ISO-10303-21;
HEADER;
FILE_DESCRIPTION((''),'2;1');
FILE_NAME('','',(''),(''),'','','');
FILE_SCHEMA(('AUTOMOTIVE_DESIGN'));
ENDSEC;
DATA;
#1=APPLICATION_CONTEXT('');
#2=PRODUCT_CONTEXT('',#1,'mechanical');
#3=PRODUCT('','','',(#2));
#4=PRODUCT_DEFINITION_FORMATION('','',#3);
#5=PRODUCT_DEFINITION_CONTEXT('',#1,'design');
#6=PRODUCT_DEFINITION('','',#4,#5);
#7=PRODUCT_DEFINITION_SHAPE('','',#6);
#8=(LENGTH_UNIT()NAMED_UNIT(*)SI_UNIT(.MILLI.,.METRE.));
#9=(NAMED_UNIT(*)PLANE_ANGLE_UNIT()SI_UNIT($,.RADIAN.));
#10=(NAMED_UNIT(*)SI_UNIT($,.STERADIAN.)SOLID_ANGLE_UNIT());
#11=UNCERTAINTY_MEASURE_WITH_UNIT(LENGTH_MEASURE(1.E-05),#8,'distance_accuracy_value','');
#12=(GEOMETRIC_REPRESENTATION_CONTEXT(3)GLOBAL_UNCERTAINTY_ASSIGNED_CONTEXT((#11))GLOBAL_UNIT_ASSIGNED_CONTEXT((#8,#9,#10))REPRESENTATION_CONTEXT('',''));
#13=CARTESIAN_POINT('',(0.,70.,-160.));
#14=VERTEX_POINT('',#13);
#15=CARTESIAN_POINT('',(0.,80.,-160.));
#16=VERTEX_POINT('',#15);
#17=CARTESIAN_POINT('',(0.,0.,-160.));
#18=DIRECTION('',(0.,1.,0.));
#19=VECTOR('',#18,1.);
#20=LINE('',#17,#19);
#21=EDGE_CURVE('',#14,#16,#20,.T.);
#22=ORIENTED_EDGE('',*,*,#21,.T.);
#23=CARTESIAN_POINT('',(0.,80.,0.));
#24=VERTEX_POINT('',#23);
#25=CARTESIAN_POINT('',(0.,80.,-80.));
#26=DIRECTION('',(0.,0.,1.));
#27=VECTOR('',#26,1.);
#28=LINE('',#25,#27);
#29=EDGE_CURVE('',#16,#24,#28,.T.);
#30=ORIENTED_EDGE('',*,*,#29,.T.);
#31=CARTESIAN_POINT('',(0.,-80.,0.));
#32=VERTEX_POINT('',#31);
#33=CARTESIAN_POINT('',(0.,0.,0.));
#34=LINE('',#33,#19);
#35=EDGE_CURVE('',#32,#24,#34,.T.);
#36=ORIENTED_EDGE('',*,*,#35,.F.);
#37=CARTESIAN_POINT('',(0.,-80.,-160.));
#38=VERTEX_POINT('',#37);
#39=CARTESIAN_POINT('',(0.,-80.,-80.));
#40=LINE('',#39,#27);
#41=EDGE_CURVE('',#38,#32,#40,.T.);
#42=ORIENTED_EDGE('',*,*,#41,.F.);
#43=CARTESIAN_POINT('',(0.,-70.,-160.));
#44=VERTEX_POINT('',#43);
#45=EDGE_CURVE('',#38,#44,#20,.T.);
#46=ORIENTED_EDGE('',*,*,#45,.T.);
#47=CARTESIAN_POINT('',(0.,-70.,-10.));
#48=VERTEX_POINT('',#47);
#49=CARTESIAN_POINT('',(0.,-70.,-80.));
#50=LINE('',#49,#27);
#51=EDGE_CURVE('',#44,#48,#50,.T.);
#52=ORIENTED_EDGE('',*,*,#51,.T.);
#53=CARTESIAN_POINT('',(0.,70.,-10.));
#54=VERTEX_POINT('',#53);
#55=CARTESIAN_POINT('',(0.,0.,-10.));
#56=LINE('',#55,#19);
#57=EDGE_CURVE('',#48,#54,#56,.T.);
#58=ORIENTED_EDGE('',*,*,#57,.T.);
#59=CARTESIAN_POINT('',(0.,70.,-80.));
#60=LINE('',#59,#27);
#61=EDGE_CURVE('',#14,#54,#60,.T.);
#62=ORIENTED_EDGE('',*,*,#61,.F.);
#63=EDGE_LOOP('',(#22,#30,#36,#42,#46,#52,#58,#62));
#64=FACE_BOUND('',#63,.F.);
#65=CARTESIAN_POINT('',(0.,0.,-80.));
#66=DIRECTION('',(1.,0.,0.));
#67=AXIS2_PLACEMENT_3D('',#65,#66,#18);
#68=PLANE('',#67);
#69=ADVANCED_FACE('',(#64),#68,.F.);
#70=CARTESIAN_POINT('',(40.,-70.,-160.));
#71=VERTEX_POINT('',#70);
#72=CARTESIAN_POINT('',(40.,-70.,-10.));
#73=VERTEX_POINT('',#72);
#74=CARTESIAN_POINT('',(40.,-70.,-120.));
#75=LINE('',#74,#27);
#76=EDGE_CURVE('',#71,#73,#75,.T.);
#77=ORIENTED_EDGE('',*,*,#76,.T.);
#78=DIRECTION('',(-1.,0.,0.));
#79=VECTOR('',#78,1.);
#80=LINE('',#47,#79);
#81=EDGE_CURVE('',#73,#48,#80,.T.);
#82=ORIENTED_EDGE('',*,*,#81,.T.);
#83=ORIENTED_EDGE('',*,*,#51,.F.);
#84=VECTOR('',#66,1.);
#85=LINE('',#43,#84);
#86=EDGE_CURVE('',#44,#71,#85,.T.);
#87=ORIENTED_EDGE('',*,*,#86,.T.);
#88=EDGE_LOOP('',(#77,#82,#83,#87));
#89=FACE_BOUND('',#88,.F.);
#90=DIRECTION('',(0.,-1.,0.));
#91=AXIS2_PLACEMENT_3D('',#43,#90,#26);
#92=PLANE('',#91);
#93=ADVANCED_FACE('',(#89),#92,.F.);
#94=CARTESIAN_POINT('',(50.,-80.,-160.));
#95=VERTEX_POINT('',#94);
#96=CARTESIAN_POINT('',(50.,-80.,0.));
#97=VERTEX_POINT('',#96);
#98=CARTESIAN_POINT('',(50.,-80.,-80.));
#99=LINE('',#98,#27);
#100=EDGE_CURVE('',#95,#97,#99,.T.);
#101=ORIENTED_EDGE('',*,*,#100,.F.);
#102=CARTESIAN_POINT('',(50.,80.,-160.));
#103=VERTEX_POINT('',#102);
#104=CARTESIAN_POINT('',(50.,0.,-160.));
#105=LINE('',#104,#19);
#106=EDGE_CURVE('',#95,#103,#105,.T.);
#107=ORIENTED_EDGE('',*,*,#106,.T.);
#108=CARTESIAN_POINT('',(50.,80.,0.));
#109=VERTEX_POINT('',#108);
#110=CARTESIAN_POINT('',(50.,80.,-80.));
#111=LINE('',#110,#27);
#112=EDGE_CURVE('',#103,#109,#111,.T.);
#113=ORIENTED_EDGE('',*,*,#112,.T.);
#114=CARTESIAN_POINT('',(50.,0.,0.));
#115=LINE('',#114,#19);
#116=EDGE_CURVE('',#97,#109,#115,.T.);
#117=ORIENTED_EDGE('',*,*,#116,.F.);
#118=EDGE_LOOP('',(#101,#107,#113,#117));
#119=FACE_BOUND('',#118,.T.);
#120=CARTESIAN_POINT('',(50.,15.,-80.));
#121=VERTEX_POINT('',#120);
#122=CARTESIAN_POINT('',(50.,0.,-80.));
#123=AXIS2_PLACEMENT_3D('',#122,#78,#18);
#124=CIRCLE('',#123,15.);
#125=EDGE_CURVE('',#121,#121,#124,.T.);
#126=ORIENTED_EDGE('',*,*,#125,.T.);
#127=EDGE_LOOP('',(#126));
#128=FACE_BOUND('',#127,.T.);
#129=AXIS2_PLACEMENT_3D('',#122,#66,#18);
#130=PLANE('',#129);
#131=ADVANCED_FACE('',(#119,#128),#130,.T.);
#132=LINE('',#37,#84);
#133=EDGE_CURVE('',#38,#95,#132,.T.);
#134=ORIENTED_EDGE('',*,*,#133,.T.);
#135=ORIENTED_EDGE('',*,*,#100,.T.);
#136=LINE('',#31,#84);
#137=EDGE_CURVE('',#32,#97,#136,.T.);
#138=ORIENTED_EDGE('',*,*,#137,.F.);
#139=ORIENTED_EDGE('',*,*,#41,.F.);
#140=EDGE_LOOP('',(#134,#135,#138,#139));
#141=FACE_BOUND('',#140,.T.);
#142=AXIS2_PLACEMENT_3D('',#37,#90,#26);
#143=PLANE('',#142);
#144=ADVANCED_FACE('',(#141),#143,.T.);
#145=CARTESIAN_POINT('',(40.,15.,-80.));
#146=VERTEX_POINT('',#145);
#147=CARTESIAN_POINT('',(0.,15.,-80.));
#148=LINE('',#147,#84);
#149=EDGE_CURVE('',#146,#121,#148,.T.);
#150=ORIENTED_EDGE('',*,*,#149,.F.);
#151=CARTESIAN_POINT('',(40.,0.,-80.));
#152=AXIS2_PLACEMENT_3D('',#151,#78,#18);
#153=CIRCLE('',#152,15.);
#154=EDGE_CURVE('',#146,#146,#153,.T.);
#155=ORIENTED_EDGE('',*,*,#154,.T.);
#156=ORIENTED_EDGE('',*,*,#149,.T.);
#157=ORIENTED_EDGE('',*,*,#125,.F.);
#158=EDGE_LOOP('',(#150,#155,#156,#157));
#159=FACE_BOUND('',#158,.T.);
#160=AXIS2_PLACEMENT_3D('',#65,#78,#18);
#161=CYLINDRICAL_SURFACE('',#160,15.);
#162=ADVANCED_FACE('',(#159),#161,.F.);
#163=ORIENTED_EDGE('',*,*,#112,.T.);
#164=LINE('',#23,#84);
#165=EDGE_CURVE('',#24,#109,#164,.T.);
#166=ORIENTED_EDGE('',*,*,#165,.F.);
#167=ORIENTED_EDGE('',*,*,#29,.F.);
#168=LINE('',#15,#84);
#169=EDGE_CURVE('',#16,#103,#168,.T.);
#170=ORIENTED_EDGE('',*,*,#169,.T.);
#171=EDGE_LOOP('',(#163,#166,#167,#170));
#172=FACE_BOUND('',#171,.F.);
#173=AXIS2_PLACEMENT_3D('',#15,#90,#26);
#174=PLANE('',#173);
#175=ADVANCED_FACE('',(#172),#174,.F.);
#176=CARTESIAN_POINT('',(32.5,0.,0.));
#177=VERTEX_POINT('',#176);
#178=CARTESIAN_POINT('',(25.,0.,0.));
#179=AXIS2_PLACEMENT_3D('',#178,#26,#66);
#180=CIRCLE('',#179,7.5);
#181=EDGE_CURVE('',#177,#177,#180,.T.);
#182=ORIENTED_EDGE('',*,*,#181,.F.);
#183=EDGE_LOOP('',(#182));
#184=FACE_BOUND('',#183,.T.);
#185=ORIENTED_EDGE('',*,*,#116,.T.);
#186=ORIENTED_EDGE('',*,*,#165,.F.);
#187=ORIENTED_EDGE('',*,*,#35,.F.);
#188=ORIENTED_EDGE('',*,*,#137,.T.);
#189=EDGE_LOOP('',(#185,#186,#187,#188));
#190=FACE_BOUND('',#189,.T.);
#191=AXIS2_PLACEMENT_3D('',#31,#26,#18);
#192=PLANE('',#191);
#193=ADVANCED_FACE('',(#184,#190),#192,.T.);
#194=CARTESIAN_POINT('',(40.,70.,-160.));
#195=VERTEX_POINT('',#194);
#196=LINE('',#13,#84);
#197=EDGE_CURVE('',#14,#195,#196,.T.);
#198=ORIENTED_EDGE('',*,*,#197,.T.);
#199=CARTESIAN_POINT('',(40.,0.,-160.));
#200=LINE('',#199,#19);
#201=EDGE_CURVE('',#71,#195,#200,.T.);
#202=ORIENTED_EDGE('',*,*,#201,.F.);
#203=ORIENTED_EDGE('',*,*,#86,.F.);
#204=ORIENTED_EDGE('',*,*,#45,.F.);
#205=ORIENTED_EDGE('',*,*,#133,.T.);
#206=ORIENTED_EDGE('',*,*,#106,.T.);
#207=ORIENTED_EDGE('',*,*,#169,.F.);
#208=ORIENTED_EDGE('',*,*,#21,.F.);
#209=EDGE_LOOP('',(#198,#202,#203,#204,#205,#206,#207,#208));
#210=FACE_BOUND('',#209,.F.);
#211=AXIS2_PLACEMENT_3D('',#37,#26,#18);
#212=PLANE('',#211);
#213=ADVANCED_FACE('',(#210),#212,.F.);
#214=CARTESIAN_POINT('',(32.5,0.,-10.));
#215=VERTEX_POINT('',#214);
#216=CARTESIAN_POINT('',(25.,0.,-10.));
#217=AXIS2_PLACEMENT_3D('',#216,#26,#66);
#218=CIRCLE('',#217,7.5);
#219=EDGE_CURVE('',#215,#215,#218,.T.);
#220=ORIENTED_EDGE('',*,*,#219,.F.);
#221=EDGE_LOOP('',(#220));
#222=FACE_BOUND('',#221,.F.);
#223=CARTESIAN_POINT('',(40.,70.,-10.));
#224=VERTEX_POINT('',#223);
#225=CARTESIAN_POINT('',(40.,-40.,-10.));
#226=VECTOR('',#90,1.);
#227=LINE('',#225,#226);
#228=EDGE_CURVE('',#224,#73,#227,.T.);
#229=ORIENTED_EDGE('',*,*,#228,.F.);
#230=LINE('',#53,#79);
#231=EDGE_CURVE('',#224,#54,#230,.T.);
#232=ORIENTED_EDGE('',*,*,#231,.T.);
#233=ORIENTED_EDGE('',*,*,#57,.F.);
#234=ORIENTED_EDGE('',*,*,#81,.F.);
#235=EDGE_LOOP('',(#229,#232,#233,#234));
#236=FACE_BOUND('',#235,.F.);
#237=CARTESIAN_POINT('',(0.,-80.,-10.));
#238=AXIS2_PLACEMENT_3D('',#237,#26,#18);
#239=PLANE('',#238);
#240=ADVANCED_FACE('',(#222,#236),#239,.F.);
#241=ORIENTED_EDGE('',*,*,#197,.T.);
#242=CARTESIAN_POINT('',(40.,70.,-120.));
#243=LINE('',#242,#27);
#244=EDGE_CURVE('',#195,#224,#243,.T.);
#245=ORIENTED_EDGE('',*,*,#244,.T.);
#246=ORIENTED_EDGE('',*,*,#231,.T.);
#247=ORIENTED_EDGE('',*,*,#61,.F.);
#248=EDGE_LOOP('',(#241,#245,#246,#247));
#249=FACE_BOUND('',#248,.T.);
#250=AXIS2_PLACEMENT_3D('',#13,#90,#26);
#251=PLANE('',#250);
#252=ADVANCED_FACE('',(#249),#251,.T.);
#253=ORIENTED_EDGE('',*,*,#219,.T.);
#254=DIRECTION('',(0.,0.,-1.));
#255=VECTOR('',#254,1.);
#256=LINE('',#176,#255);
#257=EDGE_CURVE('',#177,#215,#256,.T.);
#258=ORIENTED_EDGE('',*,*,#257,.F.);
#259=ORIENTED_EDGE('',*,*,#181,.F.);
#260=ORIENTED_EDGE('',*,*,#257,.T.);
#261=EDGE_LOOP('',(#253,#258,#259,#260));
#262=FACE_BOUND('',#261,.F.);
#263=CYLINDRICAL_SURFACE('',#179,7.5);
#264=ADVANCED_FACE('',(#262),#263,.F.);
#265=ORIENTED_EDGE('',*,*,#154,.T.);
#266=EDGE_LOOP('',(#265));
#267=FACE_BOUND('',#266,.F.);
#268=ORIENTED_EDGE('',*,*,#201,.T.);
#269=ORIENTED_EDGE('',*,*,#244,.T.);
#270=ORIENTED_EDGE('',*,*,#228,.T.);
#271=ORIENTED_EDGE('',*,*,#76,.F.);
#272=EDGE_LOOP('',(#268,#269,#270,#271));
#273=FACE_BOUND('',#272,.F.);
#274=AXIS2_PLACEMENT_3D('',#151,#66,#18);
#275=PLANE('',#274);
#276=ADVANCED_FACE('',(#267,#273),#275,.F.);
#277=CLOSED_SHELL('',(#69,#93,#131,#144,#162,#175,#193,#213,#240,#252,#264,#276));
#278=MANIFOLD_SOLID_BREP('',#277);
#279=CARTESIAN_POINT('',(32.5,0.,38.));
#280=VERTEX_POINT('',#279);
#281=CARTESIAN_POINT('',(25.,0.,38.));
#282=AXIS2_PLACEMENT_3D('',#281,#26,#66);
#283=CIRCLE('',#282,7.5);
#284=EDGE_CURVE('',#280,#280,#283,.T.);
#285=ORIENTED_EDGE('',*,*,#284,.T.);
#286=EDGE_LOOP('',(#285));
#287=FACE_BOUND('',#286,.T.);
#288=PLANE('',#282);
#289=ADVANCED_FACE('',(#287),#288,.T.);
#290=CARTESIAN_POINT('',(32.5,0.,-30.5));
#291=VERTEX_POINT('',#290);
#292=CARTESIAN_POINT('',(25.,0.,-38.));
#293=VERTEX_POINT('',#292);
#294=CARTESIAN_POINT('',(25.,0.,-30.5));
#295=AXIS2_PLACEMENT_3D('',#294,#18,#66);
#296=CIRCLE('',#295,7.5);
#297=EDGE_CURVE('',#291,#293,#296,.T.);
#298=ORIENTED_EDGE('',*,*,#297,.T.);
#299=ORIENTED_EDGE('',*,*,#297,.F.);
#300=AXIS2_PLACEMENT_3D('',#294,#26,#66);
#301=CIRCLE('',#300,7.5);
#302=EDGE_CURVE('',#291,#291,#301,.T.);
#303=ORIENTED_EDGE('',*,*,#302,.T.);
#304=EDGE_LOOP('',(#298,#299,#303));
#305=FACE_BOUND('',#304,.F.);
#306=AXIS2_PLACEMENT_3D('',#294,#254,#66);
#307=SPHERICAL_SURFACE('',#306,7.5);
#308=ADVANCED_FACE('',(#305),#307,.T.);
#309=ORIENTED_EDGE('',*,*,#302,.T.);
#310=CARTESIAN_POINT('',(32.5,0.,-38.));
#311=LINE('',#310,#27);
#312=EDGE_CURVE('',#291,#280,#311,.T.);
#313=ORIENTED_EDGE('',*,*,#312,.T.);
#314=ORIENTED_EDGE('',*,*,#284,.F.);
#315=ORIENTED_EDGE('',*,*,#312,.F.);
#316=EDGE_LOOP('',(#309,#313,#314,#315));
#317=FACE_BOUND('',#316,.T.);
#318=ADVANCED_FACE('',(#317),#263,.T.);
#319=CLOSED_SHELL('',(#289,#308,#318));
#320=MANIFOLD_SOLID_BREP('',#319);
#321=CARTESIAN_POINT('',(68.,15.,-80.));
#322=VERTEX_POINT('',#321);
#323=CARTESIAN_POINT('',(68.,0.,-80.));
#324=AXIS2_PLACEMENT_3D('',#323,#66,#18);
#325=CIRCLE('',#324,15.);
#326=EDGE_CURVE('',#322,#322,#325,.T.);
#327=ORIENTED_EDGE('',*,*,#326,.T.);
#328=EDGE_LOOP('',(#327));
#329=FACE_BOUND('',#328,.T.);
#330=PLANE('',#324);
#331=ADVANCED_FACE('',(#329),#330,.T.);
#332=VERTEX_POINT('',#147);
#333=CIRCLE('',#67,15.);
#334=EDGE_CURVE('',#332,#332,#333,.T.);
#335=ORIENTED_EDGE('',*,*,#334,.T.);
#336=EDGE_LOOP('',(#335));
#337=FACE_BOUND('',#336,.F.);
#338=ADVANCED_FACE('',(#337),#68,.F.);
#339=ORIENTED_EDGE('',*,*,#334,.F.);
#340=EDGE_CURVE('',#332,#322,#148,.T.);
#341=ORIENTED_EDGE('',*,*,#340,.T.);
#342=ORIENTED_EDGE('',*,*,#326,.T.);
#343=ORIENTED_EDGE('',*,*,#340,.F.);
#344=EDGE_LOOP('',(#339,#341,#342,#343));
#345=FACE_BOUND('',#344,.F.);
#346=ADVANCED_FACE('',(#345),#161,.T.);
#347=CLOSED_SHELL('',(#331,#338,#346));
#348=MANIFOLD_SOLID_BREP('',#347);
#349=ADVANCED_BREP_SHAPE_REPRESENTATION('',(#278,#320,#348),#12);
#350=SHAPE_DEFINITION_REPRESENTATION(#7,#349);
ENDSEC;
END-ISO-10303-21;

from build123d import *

# Parameters (mm, degrees)
F0_W     = 160
F0_H     = 160
F0_R     = 15
F1_DEPTH = 50
F2_T     = -10
F3_DEPTH = 65
F4_R     = 7.5
F5_DEPTH = 35
F6_DEPTH = 38
F7_R     = 7.5
F8_DEPTH = 68


with BuildPart() as f1:
    # F0 (on Right) → F1 (new body)
    with BuildSketch(Plane.YZ):
        with Locations((0, -80)):
            Rectangle(F0_W, F0_H)
        with Locations((0, -80)):
            Circle(F0_R, mode=Mode.SUBTRACT)
        with Locations((0, -80)):
            Circle(F0_R)
    extrude(amount=F1_DEPTH)

    # F2
    f2_openings = [f1.faces().sort_by_distance(p)[0] for p in [
        (25, 0, -160),
        (0, 0, -80),
    ]]
    offset(amount=F2_T, openings=f2_openings)

    # F0 (on Right) → F3 (cut)
    with BuildSketch(Plane.YZ):
        with Locations((0, -80)):
            Circle(F0_R)
    extrude(amount=F3_DEPTH, mode=Mode.SUBTRACT)

    # F4 (on face) → F5 (cut)
    with BuildSketch(Plane.XY):
        with Locations((25, 0)):
            Circle(F4_R)
    extrude(amount=-F5_DEPTH, mode=Mode.SUBTRACT)


with BuildPart() as f6:
    # F4 (on face) → F6 (new body, symmetric)
    with BuildSketch(Plane.XY):
        with Locations((25, 0)):
            Circle(F4_R)
    extrude(amount=F6_DEPTH, both=True)

    # F7
    f7_edges = [f6.edges().sort_by_distance(p)[0] for p in [
        (17.5, 0, -38),
    ]]
    fillet(f7_edges, radius=F7_R)


with BuildPart() as f8:
    # F0 (on Right) → F8 (new body)
    with BuildSketch(Plane.YZ):
        with Locations((0, -80)):
            Circle(F0_R)
    extrude(amount=F8_DEPTH)


solid = Compound([f1.part, f6.part, f8.part])
